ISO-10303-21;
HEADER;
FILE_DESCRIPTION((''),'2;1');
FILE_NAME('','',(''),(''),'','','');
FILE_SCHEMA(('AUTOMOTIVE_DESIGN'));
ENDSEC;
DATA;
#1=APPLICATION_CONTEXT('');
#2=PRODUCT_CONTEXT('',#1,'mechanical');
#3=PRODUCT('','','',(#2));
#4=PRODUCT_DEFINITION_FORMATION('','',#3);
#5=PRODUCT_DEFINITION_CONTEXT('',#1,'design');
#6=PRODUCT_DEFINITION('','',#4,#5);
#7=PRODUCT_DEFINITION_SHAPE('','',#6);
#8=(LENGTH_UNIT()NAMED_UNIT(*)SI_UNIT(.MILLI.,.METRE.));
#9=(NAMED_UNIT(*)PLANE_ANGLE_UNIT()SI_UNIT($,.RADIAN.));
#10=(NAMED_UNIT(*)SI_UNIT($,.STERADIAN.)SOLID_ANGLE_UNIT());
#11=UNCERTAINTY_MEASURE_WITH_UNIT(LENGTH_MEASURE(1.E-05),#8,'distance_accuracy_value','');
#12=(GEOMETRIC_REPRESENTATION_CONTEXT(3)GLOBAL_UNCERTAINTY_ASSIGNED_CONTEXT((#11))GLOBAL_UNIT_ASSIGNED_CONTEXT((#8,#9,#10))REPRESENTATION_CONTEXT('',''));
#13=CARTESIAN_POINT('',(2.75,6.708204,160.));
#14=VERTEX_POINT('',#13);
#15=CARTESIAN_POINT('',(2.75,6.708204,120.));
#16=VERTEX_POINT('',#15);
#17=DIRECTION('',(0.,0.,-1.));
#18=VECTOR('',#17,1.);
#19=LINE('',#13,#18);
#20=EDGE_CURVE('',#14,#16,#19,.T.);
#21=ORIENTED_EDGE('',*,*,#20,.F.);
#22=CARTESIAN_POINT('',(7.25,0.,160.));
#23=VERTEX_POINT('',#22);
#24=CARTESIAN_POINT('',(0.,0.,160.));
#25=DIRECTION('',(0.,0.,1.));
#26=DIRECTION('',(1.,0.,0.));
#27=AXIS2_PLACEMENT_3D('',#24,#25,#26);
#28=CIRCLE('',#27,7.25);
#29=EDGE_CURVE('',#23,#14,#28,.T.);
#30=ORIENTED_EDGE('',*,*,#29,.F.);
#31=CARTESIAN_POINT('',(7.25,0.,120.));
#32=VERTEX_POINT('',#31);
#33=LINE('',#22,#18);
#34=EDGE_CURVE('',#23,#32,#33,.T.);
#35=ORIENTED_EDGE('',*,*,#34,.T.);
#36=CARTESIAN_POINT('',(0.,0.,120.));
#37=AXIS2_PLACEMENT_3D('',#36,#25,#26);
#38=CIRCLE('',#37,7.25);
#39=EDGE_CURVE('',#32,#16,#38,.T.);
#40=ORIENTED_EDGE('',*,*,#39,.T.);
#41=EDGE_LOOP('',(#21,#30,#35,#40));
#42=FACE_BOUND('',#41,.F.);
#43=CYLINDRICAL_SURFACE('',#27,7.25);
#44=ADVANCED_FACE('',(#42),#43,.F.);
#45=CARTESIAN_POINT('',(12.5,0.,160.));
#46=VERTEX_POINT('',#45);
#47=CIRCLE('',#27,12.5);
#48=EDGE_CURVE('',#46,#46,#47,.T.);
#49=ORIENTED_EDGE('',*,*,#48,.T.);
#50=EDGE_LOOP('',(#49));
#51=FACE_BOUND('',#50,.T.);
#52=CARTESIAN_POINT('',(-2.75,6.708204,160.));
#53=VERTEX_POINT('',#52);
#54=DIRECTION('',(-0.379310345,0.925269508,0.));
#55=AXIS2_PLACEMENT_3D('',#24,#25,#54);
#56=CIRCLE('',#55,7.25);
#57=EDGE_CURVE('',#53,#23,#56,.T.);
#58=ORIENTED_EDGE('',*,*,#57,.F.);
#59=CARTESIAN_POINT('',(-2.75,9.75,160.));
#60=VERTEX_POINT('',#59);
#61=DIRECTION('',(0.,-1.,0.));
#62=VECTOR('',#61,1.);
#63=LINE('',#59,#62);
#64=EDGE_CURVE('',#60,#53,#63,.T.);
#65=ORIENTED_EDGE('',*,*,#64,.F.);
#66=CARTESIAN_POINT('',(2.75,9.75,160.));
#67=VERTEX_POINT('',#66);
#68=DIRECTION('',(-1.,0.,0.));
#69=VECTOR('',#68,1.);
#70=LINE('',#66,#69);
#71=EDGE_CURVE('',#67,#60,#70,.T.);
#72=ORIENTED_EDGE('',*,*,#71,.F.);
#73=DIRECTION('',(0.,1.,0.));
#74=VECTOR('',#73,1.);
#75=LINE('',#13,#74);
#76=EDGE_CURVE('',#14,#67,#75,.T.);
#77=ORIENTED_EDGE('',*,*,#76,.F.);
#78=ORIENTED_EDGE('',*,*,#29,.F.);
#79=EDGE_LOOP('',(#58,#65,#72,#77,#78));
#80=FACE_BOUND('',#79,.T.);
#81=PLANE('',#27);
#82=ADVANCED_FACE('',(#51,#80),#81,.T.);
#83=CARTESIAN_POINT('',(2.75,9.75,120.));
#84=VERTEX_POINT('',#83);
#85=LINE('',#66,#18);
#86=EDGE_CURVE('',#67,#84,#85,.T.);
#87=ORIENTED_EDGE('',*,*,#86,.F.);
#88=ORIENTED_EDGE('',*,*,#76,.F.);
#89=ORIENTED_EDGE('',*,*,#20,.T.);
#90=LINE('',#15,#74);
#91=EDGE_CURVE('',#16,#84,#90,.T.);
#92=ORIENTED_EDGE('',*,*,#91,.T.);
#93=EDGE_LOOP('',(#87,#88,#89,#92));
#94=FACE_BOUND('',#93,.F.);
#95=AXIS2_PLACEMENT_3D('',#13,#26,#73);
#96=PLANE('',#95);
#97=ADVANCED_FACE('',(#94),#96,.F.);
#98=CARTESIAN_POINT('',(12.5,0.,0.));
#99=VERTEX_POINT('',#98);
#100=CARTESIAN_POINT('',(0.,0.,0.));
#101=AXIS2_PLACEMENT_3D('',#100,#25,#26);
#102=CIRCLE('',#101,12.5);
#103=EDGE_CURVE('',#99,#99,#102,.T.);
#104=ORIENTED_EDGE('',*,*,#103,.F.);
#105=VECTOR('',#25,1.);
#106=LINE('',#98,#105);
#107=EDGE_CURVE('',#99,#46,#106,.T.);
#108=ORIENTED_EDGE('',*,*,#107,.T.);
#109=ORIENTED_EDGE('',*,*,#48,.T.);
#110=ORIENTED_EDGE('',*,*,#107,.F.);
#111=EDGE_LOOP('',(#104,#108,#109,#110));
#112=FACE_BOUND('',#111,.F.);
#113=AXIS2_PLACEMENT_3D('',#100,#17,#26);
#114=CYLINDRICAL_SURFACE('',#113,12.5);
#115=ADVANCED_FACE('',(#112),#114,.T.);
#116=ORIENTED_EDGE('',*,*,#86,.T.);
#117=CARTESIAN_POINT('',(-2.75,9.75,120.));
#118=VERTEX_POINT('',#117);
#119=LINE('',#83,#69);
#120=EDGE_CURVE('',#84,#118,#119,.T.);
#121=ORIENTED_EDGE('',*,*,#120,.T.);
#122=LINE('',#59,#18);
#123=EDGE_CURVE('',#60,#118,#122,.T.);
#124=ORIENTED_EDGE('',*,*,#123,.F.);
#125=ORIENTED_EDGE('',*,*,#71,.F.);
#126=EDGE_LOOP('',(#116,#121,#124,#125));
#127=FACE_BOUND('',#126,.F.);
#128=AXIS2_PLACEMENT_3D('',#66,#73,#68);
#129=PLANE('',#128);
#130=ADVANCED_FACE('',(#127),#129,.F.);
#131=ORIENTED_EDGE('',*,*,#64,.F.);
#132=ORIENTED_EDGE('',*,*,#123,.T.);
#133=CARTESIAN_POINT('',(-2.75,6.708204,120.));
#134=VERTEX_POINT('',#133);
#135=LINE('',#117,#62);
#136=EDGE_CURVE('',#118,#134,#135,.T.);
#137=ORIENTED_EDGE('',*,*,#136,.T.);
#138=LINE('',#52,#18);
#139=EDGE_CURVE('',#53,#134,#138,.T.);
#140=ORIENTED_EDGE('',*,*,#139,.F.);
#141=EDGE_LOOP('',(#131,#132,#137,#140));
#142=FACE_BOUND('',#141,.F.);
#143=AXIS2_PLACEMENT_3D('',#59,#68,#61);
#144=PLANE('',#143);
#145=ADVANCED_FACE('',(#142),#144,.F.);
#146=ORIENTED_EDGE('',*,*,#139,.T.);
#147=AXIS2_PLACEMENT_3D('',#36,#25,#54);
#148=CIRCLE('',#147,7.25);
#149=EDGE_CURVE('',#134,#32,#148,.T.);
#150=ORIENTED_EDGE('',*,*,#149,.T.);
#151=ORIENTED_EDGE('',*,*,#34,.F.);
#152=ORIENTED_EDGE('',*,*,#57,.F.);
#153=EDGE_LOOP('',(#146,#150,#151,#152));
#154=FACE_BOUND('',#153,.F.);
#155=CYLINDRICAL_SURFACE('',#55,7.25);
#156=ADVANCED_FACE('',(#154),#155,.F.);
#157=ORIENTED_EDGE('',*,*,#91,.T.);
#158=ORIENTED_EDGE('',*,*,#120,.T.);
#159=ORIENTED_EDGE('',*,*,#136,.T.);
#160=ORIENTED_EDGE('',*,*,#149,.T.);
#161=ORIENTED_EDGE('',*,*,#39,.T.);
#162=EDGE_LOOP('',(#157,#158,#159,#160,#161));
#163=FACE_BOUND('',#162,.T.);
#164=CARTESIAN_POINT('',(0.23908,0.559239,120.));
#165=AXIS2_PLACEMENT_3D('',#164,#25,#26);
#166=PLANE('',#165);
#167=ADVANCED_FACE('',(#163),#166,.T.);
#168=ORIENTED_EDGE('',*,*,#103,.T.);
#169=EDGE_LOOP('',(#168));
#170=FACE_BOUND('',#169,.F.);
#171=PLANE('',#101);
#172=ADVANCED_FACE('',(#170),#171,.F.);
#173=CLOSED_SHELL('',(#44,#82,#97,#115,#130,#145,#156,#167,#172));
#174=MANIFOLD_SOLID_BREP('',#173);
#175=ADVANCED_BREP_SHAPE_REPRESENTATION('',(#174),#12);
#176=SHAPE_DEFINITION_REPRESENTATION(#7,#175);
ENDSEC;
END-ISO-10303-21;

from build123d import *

# Parameters (mm, degrees)
F0_R     = 12.5
F1_DEPTH = 160
F3_DEPTH = 40


# Not quite as in the source:
# - a feature names something its author has since deleted; it is built from what else it names


with BuildPart() as f1:
    # F0 (on Top) → F1 (new body)
    with BuildSketch(Plane.XY):
        Circle(F0_R)
    extrude(amount=F1_DEPTH)

    # F2 (on face) → F3 (cut)
    with BuildSketch(Plane.XY.offset(160)):
        with BuildLine():
            ThreePointArc((-2.75, 6.7082039325), (-4.0388736054, -6.0207972894), (7.25, 0))
            ThreePointArc((7.25, 0), (6.0207972894, 4.0388736054), (2.75, 6.7082039325))
            Line((2.75, 6.7082039325), (2.75, 4.75))
            Line((2.75, 4.75), (-2.75, 4.75))
            Line((-2.75, 4.75), (-2.75, 6.7082039325))
        make_face()
        with BuildLine():
            Line((2.75, 4.75), (2.75, 6.7082039325))
            ThreePointArc((2.75, 6.7082039325), (0, 7.25), (-2.75, 6.7082039325))
            Line((-2.75, 6.7082039325), (-2.75, 4.75))
            Line((-2.75, 4.75), (2.75, 4.75))
        make_face()
        with BuildLine():
            ThreePointArc((-2.75, 6.7082039325), (0, 7.25), (2.75, 6.7082039325))
            Line((2.75, 6.7082039325), (2.75, 9.75))
            Line((2.75, 9.75), (-2.75, 9.75))
            Line((-2.75, 9.75), (-2.75, 6.7082039325))
        make_face()
    extrude(amount=-F3_DEPTH, mode=Mode.SUBTRACT)


solid = f1.part
